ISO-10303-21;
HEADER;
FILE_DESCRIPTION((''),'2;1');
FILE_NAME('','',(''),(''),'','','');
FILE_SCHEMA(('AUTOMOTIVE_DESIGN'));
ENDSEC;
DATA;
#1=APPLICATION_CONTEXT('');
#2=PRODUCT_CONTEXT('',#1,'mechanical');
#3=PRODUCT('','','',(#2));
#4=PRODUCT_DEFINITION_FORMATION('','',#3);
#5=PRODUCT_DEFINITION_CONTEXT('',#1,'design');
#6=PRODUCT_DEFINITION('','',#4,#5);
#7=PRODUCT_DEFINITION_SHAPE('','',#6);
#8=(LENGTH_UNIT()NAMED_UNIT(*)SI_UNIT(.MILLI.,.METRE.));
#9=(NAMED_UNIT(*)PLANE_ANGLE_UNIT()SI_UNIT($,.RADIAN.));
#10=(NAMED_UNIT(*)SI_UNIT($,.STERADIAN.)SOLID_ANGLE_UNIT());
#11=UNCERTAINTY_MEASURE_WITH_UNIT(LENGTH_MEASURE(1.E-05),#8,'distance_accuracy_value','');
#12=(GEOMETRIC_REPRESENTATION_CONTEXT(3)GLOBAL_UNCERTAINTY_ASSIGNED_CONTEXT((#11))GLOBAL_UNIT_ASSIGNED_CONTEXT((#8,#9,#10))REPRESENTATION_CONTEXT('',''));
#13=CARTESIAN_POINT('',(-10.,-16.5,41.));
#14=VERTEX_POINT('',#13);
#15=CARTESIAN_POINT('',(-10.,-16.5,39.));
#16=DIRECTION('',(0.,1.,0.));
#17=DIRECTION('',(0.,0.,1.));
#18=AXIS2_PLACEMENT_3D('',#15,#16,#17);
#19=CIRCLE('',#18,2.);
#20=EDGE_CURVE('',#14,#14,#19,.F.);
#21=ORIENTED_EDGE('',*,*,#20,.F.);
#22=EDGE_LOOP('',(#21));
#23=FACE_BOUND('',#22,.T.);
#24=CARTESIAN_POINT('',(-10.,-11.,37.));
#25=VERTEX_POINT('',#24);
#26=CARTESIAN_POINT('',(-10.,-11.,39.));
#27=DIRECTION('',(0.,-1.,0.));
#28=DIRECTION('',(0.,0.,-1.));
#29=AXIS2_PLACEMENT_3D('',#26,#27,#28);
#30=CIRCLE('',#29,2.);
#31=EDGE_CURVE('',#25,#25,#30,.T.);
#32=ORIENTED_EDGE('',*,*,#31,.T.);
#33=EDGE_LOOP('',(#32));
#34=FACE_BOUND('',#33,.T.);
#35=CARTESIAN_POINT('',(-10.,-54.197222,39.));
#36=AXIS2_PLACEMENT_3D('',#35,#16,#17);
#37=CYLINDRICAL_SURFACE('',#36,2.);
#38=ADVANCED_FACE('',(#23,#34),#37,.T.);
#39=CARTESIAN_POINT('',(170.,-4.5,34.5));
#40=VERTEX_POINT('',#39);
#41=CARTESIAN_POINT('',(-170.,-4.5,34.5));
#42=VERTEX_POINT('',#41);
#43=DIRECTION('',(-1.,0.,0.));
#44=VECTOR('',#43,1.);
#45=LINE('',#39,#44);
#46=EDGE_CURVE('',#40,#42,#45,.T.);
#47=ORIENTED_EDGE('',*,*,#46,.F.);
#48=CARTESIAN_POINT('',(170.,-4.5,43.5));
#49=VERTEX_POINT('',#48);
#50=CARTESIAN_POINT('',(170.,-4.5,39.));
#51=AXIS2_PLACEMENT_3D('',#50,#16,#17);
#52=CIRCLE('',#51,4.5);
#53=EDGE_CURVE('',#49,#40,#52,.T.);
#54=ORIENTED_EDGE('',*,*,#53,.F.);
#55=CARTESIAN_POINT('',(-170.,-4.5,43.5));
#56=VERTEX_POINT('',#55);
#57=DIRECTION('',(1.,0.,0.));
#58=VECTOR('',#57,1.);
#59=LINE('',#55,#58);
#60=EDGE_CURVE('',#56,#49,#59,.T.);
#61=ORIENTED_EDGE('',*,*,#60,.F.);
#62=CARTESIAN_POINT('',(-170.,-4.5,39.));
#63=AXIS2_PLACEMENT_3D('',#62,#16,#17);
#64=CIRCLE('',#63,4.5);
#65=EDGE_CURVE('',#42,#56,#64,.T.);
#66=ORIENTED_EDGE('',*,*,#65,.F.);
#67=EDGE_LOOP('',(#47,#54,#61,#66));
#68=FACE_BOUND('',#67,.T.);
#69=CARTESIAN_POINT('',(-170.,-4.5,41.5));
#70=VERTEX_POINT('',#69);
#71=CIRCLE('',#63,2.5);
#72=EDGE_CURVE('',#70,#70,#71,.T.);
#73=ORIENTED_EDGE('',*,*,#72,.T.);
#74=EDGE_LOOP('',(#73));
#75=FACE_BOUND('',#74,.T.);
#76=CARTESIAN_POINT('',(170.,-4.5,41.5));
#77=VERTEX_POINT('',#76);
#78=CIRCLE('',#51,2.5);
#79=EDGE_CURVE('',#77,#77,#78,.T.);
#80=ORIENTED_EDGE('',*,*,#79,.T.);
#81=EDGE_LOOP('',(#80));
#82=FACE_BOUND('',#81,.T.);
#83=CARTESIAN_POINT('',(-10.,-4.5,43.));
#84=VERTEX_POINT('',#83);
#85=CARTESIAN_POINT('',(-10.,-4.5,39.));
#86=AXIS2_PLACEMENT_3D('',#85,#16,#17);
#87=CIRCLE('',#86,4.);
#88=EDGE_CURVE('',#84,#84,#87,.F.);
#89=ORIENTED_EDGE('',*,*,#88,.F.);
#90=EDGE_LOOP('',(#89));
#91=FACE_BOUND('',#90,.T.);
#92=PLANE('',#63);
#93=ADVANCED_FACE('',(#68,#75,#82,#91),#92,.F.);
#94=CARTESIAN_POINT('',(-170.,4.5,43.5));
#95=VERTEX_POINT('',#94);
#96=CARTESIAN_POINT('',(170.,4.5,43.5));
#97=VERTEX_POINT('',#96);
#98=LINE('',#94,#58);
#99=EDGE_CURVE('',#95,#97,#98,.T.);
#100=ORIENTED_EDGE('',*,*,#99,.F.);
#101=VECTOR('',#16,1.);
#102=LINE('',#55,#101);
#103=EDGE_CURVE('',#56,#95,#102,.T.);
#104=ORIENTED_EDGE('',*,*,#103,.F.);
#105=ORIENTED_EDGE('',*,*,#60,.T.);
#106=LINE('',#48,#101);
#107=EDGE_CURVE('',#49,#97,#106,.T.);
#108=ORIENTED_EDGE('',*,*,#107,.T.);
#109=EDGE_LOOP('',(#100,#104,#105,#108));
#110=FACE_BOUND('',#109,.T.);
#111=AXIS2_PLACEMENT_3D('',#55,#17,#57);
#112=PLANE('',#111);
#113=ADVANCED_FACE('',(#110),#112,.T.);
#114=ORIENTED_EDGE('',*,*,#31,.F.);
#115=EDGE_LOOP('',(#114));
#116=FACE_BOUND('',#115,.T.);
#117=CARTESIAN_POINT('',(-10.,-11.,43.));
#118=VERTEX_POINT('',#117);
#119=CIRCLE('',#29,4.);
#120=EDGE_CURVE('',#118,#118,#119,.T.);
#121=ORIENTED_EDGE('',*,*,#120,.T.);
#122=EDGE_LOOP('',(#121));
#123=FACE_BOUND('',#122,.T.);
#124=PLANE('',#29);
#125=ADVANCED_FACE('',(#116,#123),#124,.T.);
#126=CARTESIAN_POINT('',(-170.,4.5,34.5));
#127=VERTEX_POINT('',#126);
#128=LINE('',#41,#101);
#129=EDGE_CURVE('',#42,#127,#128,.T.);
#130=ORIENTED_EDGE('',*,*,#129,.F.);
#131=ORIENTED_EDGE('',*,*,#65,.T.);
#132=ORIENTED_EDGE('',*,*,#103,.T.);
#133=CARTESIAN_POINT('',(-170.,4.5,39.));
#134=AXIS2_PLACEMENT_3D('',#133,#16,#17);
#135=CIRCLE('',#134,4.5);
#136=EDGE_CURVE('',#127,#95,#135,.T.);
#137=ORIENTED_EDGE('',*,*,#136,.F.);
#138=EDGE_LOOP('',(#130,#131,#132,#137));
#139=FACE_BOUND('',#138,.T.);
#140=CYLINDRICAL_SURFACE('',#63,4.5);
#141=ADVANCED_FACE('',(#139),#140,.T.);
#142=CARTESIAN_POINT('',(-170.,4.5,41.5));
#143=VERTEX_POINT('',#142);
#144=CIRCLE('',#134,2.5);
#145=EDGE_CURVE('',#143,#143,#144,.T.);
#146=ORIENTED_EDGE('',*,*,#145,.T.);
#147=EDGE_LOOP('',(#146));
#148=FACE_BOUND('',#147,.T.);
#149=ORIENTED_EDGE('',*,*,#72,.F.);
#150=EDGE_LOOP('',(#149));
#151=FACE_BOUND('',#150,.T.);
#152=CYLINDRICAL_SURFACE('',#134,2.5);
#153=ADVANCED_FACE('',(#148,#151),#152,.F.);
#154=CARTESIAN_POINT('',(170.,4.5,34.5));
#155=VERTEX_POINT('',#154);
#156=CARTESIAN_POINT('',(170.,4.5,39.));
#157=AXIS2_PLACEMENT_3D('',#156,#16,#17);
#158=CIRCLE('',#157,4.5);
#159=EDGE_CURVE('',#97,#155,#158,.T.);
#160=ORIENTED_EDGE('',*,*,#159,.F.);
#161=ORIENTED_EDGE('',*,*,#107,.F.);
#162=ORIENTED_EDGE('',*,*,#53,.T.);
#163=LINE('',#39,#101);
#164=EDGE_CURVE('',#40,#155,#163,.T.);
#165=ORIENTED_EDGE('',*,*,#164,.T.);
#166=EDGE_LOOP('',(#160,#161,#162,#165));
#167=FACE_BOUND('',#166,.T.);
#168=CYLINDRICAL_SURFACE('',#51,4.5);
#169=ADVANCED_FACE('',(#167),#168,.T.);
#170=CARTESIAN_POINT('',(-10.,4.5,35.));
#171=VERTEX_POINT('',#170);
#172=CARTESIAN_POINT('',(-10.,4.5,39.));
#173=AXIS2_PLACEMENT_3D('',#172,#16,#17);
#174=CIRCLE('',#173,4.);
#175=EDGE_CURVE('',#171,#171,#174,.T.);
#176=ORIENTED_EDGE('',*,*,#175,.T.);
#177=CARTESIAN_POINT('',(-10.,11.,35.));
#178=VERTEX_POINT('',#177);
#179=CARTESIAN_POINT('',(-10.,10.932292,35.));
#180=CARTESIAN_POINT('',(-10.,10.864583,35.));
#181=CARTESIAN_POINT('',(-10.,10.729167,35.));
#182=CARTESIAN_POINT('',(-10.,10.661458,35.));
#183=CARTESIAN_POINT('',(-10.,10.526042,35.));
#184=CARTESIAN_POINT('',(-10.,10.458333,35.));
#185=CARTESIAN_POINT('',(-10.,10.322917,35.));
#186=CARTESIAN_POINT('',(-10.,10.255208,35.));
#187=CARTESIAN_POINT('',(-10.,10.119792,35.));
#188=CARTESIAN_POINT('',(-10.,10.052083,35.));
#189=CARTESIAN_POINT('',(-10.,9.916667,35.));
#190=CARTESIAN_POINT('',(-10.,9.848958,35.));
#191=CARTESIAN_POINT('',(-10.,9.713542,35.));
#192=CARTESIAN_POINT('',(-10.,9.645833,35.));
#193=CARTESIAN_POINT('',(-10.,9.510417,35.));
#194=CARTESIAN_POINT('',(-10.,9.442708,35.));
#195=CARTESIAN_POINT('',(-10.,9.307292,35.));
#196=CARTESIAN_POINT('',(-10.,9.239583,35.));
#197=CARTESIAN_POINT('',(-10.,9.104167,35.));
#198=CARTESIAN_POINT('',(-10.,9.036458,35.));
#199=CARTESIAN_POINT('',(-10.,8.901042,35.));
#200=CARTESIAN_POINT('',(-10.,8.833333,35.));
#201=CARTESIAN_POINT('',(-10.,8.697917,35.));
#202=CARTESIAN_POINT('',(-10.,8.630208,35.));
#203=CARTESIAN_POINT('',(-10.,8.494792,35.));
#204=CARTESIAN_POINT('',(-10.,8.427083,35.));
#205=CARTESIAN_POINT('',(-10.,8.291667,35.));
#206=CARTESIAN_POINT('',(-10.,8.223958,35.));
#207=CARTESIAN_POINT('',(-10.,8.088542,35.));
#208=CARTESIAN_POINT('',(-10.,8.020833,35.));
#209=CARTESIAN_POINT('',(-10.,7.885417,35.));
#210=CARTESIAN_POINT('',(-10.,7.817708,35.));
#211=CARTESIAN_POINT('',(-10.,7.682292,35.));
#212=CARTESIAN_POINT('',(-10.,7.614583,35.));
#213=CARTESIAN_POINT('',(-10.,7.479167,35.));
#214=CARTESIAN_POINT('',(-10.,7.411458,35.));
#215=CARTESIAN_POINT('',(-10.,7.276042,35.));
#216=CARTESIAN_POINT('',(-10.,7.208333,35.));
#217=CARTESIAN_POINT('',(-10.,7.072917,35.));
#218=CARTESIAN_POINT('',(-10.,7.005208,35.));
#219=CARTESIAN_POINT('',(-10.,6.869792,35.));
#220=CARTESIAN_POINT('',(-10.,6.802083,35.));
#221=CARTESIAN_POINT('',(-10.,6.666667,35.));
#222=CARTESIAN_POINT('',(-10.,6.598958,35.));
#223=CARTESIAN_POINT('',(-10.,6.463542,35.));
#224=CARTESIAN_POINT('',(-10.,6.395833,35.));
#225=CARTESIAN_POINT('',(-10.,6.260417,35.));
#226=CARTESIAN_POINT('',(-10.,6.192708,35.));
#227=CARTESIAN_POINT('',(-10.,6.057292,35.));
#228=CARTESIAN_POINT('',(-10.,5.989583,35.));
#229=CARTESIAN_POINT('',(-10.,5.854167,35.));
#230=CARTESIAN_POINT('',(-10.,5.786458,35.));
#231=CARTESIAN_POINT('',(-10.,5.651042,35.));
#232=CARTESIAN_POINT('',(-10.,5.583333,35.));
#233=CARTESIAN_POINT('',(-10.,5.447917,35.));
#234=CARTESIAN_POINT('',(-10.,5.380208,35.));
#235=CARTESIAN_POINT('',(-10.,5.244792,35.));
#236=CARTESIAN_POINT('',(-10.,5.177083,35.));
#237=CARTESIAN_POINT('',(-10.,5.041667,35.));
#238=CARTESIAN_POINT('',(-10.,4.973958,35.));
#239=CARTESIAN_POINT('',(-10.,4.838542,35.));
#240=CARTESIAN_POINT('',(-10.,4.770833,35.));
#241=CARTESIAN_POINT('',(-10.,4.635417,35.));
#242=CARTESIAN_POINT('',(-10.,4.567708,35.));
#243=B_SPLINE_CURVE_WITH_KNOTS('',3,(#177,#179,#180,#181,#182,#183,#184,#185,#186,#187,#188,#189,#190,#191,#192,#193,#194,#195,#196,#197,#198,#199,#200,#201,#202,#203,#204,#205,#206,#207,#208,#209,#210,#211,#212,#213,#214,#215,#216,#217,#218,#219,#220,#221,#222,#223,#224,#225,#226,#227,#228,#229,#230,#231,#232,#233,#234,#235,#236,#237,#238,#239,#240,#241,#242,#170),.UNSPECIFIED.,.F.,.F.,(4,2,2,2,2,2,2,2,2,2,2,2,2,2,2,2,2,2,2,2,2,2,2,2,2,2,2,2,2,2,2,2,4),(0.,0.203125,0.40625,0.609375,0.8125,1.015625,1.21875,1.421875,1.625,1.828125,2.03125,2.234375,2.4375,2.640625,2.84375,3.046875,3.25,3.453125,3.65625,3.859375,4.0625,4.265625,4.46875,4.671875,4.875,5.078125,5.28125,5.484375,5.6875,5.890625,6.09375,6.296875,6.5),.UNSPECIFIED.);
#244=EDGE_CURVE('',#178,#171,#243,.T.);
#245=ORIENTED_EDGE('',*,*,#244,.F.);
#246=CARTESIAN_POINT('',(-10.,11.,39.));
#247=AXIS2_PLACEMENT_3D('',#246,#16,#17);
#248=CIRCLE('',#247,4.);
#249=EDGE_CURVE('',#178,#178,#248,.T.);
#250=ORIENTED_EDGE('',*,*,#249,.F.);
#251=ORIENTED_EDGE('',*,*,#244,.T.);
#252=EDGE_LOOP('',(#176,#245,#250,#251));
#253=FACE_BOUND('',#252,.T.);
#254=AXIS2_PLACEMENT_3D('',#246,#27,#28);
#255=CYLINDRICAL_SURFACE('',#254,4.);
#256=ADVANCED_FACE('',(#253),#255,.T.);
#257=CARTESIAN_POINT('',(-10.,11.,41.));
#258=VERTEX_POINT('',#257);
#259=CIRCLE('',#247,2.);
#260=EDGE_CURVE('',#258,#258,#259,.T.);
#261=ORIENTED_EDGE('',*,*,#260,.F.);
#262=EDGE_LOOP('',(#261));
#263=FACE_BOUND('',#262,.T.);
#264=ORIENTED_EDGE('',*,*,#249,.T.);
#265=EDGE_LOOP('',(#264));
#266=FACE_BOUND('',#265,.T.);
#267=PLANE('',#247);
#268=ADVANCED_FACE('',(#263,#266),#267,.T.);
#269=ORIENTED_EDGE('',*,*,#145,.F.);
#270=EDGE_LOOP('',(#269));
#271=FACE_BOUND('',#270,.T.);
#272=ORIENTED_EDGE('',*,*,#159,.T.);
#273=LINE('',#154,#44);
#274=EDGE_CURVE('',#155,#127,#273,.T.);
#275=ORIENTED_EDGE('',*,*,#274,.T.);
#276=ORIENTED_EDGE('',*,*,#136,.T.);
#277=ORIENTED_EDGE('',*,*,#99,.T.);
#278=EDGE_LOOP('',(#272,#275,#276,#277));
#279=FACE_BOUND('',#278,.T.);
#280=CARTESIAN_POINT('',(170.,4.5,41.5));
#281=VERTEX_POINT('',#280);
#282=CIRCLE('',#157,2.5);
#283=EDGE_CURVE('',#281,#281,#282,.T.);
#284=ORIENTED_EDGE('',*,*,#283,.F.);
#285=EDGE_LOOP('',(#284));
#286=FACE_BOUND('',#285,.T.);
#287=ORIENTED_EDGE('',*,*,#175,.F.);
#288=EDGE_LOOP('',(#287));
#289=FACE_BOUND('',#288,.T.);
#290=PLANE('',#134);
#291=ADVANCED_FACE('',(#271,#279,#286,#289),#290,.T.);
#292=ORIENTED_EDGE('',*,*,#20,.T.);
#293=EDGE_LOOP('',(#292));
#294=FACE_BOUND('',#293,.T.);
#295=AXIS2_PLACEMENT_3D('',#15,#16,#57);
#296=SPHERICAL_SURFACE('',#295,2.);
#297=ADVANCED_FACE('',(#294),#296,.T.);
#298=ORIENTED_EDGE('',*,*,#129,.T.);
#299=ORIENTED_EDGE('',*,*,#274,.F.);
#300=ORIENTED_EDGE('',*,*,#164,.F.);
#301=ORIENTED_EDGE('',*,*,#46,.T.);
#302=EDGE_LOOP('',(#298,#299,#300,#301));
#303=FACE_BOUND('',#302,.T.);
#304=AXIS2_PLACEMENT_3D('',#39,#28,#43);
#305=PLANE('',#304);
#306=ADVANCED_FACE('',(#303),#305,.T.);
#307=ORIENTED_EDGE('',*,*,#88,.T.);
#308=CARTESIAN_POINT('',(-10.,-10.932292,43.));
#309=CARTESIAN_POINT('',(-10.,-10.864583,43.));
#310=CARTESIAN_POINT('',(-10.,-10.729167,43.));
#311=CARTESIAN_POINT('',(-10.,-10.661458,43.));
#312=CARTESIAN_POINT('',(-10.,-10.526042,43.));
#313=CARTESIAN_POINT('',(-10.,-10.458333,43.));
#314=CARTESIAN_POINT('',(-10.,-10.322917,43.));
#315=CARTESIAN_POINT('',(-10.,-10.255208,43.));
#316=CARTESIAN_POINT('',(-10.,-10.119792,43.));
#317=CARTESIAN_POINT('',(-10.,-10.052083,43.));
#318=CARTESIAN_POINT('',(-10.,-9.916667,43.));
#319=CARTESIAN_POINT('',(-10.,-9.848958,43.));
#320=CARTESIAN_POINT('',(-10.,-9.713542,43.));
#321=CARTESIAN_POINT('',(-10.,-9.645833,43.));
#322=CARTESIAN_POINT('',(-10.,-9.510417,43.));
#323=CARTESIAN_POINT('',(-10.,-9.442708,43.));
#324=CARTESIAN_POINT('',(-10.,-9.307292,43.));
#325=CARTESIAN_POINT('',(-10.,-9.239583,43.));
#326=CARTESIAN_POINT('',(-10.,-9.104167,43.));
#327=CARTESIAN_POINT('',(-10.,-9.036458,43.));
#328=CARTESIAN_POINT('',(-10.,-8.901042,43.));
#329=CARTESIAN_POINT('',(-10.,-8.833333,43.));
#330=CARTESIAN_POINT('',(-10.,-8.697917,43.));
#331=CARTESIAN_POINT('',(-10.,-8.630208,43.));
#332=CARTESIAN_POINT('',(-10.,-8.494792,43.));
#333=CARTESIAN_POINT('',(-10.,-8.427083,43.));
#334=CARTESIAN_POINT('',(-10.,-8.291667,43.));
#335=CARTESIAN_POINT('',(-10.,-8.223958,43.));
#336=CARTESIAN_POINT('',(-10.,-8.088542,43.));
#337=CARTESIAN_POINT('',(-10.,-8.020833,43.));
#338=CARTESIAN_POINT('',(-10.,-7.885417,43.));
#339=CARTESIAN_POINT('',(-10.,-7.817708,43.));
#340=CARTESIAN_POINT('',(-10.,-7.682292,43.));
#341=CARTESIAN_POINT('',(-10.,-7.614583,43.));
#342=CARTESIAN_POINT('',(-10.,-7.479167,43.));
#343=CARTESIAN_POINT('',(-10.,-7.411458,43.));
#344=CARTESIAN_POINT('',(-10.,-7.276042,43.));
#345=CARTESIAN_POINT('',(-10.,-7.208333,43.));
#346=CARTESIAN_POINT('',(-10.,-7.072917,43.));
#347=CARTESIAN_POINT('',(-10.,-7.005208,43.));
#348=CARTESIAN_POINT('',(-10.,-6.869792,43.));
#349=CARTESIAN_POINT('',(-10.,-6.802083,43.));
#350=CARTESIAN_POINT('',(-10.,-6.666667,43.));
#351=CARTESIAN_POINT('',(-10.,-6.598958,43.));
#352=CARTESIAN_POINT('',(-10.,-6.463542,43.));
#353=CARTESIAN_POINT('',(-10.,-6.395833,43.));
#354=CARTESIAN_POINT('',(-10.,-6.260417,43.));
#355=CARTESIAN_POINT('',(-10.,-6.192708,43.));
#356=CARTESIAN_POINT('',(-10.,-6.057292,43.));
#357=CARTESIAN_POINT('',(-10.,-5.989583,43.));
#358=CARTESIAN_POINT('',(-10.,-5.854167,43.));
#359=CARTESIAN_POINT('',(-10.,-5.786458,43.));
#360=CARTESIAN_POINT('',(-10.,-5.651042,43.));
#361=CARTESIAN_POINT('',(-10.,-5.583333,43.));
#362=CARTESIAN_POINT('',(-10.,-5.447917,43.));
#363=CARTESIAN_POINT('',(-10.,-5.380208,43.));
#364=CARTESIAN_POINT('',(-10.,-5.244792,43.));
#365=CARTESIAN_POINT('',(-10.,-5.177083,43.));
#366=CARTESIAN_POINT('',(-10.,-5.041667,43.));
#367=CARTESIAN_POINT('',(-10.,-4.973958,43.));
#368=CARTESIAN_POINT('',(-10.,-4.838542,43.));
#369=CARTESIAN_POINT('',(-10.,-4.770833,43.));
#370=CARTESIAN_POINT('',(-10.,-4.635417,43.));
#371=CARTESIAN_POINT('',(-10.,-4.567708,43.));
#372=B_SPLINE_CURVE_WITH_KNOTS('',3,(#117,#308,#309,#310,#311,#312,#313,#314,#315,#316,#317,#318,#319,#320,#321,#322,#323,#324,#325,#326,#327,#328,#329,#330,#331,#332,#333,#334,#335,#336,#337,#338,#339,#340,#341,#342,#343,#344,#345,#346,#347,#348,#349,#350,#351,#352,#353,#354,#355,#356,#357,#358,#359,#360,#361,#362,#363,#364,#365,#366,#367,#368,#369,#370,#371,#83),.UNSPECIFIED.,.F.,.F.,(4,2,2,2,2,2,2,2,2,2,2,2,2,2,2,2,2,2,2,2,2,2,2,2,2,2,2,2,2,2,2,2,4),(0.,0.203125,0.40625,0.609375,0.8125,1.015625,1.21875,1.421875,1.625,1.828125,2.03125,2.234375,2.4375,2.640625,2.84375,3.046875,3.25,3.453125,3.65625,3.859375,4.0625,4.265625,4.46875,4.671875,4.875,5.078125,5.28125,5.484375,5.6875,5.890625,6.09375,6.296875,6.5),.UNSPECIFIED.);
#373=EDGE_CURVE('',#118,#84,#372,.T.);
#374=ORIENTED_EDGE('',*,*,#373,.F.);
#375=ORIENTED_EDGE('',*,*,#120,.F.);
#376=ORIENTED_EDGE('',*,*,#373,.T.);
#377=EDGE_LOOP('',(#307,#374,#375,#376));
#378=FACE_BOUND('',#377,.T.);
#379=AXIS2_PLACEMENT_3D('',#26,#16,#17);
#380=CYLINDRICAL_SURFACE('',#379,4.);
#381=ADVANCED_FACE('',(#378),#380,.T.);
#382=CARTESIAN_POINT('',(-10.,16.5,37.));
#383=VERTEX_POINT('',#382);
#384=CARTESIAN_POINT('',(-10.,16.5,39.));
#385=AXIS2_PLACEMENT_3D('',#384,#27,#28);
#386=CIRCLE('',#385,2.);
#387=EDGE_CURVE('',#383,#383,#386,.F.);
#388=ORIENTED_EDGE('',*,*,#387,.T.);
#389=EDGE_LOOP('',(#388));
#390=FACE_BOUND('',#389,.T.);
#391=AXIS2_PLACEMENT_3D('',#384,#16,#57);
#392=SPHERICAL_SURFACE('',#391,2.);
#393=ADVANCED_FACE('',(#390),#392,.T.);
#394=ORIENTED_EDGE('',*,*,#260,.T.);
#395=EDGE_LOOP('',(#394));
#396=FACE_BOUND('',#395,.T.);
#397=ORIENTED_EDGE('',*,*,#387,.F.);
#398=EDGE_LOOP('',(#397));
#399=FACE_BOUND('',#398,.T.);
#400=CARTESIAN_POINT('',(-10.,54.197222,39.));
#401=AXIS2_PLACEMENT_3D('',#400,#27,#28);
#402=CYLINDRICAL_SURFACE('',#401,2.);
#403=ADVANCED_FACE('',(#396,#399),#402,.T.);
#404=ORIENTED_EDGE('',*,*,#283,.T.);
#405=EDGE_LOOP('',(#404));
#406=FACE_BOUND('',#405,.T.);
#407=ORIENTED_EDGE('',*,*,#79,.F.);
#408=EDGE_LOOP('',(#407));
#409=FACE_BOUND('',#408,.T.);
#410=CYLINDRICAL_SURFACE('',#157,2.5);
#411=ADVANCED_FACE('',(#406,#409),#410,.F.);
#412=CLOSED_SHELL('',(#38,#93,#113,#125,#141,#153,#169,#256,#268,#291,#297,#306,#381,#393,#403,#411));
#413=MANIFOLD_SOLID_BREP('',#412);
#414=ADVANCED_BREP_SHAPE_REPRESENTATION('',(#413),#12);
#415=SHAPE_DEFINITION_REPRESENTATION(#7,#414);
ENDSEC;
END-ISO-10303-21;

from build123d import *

# Parameters (mm, degrees)
BOSS_EXTRUDE1_DEPTH          = 9
SKETCH2_R                    = 4
BOSS_EXTRUDE2_DEPTH          = 6.5
BOSS_EXTRUDE4_START          = 6.5
SKETCH4_R                    = 4
BOSS_EXTRUDE4_DEPTH          = 6.5
F_5_0_5_DIAMETER_HOLE1_D     = 5
F_5_0_5_DIAMETER_HOLE1_DEPTH = 23


# Read off the part's stored shape, not the designer's step: Boss-Extrude3, Boss-Extrude5
with BuildPart() as part:
    # Sketch1 → Boss-Extrude1 (new body)
    with BuildSketch(Plane(origin=(0, 4.5, 0), x_dir=(1, 0, 0), z_dir=(0, 1, 0))):
        with BuildLine():
            Line((-170, -43.5), (170, -43.5))
            ThreePointArc((170, -43.5), (174.5, -39), (170, -34.5))
            Line((170, -34.5), (-170, -34.5))
            ThreePointArc((-170, -34.5), (-174.5, -39), (-170, -43.5))
        make_face()
    extrude(amount=-BOSS_EXTRUDE1_DEPTH)

    # Sketch2 → Boss-Extrude2 (add)
    with BuildSketch(Plane.XZ.offset(4.5)):
        with Locations(Location((-10, 39, 0), (0, 0, 90))):
            Circle(SKETCH2_R)
    extrude(amount=BOSS_EXTRUDE2_DEPTH)

    # Boss-Extrude3 outline → Boss-Extrude3 (revolve)
    with BuildSketch(Plane(origin=(-10, 0, 39), x_dir=(1, 0, 0), z_dir=(0, 0, 1))):
        with BuildLine():
            ThreePointArc((0, -18.5), (1.414213563, -17.914213562), (2, -16.499999998))
            Line((2, -16.499999998), (2, -11))
            Line((2, -11), (0, -11))
            Line((0, -11), (0, -18.5))
        make_face()
    revolve(axis=Axis((-10, 0, 39), (0, 1, 0)))

    # Sketch4 → Boss-Extrude4 (add)
    with BuildSketch(Plane(origin=(0, 4.5, 0), x_dir=(-1, 0, 0), z_dir=(0, 1, 0)).offset(BOSS_EXTRUDE4_START)):
        with Locations(Location((10, 39, 0), (0, 0, 90))):
            Circle(SKETCH4_R)
    extrude(amount=-BOSS_EXTRUDE4_DEPTH)

    # Boss-Extrude5 outline → Boss-Extrude5 (revolve)
    with BuildSketch(Plane(origin=(-10, 0, 39), x_dir=(1, 0, 0), z_dir=(0, 0, 1))):
        with BuildLine():
            Line((2, 11), (2, 16.499999998))
            ThreePointArc((2, 16.499999998), (1.414213563, 17.914213562), (0, 18.5))
            Line((0, 18.5), (0, 11))
            Line((0, 11), (2, 11))
        make_face()
    revolve(axis=Axis((-10, 0, 39), (0, 1, 0)))

    # Ø5.0 (5) Diameter Hole1
    with Locations(Plane(origin=(0, 4.5, 0), x_dir=(1, 0, 0), z_dir=(0, 1, 0))):
        with Locations((-170, -39), (170, -39)):
            Hole(F_5_0_5_DIAMETER_HOLE1_D / 2, depth=F_5_0_5_DIAMETER_HOLE1_DEPTH)


solid = part.part
